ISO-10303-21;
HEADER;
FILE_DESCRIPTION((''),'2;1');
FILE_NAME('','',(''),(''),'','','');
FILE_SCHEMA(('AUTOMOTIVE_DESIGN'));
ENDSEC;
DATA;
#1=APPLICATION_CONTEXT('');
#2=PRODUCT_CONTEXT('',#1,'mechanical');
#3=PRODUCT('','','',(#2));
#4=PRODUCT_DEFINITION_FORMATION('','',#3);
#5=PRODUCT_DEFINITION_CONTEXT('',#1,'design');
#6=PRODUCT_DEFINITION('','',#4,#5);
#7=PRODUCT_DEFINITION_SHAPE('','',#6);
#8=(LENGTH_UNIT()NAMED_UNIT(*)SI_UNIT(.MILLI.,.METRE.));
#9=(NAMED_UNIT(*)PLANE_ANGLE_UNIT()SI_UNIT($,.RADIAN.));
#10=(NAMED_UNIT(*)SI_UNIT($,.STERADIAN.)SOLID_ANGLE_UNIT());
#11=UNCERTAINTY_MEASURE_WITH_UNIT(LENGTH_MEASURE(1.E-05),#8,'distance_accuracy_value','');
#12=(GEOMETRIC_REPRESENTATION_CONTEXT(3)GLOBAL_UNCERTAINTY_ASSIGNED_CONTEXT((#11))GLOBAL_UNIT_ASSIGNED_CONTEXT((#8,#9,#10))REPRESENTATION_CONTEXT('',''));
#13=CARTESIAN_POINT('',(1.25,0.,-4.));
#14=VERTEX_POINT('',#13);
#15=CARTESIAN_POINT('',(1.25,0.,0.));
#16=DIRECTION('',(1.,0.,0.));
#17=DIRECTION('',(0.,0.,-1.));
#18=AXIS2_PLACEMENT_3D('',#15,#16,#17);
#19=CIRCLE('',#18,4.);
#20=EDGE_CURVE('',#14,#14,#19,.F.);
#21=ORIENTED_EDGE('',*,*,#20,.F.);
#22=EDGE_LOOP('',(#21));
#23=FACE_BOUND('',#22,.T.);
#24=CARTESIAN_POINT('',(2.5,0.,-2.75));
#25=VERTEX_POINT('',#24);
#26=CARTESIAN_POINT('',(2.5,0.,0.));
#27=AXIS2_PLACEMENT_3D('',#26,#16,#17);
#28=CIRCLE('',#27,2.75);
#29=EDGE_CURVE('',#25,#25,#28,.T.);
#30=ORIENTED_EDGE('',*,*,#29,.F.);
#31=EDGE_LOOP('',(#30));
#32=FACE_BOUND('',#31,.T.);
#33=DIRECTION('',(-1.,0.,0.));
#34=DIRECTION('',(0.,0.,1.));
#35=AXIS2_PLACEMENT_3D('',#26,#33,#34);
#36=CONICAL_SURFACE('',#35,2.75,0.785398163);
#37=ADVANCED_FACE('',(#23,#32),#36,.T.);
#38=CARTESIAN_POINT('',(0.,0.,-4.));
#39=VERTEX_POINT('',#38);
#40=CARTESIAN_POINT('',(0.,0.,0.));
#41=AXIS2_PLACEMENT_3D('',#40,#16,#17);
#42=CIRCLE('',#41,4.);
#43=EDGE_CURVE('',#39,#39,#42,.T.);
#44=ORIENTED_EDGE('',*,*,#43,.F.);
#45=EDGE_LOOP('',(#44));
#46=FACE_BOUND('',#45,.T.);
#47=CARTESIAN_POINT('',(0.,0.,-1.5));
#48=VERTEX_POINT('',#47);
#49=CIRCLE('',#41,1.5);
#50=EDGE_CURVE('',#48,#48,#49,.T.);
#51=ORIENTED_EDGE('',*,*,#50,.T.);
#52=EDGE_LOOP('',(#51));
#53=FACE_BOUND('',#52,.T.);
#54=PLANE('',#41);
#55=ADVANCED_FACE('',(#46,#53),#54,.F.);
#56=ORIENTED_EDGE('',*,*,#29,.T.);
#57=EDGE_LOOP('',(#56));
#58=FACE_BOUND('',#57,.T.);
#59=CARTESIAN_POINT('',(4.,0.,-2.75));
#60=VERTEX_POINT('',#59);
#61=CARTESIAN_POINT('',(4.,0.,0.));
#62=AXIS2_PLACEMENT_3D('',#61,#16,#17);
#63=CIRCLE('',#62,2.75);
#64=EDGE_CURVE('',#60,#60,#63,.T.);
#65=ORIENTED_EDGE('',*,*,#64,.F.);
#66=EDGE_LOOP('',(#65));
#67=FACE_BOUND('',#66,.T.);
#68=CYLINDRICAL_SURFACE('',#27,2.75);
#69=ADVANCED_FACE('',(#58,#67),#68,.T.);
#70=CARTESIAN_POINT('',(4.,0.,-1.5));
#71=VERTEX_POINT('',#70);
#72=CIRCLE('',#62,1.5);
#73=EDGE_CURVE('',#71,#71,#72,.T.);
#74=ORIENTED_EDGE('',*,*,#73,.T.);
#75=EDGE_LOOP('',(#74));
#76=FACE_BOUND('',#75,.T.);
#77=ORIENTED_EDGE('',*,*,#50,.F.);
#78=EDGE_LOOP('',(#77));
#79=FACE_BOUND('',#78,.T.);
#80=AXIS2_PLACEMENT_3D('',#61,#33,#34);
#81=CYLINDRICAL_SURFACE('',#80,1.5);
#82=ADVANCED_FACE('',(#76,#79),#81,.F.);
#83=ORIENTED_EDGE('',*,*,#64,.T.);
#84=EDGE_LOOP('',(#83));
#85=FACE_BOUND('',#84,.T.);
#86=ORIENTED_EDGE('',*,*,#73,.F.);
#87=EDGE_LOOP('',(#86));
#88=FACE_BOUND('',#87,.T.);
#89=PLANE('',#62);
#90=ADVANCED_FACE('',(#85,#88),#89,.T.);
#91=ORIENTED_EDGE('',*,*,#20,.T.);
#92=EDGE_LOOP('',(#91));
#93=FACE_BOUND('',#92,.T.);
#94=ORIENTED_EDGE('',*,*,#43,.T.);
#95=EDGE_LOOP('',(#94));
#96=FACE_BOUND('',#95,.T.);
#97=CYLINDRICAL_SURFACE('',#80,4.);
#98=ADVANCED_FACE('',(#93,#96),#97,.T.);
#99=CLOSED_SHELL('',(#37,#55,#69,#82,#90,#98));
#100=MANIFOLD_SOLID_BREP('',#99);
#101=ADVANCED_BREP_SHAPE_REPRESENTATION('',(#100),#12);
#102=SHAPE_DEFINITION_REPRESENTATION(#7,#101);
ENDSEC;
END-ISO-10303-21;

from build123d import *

# Parameters (mm, degrees)
SKETCH1_R           = 4
SKETCH1_R_2         = 1.5
BOSS_EXTRUDE1_DEPTH = 4
SKETCH2_OUTSIDE_W   = 12.4
SKETCH2_OUTSIDE_H   = 12.4
SKETCH2_OUTSIDE_R   = 2.75
CUT_EXTRUDE1_DEPTH  = 1.5
CHAMFER1_SIZE       = 1.25


with BuildPart() as part:
    # Sketch1 → Boss-Extrude1 (new body)
    with BuildSketch(Plane(origin=(0, 0, 0), x_dir=(0, 0, -1), z_dir=(1, 0, 0))):
        Circle(SKETCH1_R)
        Circle(SKETCH1_R_2, mode=Mode.SUBTRACT)
    extrude(amount=BOSS_EXTRUDE1_DEPTH)

    # Sketch2 outside → Cut-Extrude1 (cut)
    with BuildSketch(Plane(origin=(4, 0, 0), x_dir=(0, 0, -1), z_dir=(1, 0, 0))):
        Rectangle(SKETCH2_OUTSIDE_W, SKETCH2_OUTSIDE_H)
        Circle(SKETCH2_OUTSIDE_R, mode=Mode.SUBTRACT)
    extrude(amount=-CUT_EXTRUDE1_DEPTH, mode=Mode.SUBTRACT)

    # Chamfer1
    chamfer1_edges = [part.edges().sort_by_distance(p)[0] for p in [
        (2.5, 0, 4),
    ]]
    chamfer(chamfer1_edges, length=CHAMFER1_SIZE - 0.0001)  # a hair under: the kernel refuses the full size


solid = part.part
